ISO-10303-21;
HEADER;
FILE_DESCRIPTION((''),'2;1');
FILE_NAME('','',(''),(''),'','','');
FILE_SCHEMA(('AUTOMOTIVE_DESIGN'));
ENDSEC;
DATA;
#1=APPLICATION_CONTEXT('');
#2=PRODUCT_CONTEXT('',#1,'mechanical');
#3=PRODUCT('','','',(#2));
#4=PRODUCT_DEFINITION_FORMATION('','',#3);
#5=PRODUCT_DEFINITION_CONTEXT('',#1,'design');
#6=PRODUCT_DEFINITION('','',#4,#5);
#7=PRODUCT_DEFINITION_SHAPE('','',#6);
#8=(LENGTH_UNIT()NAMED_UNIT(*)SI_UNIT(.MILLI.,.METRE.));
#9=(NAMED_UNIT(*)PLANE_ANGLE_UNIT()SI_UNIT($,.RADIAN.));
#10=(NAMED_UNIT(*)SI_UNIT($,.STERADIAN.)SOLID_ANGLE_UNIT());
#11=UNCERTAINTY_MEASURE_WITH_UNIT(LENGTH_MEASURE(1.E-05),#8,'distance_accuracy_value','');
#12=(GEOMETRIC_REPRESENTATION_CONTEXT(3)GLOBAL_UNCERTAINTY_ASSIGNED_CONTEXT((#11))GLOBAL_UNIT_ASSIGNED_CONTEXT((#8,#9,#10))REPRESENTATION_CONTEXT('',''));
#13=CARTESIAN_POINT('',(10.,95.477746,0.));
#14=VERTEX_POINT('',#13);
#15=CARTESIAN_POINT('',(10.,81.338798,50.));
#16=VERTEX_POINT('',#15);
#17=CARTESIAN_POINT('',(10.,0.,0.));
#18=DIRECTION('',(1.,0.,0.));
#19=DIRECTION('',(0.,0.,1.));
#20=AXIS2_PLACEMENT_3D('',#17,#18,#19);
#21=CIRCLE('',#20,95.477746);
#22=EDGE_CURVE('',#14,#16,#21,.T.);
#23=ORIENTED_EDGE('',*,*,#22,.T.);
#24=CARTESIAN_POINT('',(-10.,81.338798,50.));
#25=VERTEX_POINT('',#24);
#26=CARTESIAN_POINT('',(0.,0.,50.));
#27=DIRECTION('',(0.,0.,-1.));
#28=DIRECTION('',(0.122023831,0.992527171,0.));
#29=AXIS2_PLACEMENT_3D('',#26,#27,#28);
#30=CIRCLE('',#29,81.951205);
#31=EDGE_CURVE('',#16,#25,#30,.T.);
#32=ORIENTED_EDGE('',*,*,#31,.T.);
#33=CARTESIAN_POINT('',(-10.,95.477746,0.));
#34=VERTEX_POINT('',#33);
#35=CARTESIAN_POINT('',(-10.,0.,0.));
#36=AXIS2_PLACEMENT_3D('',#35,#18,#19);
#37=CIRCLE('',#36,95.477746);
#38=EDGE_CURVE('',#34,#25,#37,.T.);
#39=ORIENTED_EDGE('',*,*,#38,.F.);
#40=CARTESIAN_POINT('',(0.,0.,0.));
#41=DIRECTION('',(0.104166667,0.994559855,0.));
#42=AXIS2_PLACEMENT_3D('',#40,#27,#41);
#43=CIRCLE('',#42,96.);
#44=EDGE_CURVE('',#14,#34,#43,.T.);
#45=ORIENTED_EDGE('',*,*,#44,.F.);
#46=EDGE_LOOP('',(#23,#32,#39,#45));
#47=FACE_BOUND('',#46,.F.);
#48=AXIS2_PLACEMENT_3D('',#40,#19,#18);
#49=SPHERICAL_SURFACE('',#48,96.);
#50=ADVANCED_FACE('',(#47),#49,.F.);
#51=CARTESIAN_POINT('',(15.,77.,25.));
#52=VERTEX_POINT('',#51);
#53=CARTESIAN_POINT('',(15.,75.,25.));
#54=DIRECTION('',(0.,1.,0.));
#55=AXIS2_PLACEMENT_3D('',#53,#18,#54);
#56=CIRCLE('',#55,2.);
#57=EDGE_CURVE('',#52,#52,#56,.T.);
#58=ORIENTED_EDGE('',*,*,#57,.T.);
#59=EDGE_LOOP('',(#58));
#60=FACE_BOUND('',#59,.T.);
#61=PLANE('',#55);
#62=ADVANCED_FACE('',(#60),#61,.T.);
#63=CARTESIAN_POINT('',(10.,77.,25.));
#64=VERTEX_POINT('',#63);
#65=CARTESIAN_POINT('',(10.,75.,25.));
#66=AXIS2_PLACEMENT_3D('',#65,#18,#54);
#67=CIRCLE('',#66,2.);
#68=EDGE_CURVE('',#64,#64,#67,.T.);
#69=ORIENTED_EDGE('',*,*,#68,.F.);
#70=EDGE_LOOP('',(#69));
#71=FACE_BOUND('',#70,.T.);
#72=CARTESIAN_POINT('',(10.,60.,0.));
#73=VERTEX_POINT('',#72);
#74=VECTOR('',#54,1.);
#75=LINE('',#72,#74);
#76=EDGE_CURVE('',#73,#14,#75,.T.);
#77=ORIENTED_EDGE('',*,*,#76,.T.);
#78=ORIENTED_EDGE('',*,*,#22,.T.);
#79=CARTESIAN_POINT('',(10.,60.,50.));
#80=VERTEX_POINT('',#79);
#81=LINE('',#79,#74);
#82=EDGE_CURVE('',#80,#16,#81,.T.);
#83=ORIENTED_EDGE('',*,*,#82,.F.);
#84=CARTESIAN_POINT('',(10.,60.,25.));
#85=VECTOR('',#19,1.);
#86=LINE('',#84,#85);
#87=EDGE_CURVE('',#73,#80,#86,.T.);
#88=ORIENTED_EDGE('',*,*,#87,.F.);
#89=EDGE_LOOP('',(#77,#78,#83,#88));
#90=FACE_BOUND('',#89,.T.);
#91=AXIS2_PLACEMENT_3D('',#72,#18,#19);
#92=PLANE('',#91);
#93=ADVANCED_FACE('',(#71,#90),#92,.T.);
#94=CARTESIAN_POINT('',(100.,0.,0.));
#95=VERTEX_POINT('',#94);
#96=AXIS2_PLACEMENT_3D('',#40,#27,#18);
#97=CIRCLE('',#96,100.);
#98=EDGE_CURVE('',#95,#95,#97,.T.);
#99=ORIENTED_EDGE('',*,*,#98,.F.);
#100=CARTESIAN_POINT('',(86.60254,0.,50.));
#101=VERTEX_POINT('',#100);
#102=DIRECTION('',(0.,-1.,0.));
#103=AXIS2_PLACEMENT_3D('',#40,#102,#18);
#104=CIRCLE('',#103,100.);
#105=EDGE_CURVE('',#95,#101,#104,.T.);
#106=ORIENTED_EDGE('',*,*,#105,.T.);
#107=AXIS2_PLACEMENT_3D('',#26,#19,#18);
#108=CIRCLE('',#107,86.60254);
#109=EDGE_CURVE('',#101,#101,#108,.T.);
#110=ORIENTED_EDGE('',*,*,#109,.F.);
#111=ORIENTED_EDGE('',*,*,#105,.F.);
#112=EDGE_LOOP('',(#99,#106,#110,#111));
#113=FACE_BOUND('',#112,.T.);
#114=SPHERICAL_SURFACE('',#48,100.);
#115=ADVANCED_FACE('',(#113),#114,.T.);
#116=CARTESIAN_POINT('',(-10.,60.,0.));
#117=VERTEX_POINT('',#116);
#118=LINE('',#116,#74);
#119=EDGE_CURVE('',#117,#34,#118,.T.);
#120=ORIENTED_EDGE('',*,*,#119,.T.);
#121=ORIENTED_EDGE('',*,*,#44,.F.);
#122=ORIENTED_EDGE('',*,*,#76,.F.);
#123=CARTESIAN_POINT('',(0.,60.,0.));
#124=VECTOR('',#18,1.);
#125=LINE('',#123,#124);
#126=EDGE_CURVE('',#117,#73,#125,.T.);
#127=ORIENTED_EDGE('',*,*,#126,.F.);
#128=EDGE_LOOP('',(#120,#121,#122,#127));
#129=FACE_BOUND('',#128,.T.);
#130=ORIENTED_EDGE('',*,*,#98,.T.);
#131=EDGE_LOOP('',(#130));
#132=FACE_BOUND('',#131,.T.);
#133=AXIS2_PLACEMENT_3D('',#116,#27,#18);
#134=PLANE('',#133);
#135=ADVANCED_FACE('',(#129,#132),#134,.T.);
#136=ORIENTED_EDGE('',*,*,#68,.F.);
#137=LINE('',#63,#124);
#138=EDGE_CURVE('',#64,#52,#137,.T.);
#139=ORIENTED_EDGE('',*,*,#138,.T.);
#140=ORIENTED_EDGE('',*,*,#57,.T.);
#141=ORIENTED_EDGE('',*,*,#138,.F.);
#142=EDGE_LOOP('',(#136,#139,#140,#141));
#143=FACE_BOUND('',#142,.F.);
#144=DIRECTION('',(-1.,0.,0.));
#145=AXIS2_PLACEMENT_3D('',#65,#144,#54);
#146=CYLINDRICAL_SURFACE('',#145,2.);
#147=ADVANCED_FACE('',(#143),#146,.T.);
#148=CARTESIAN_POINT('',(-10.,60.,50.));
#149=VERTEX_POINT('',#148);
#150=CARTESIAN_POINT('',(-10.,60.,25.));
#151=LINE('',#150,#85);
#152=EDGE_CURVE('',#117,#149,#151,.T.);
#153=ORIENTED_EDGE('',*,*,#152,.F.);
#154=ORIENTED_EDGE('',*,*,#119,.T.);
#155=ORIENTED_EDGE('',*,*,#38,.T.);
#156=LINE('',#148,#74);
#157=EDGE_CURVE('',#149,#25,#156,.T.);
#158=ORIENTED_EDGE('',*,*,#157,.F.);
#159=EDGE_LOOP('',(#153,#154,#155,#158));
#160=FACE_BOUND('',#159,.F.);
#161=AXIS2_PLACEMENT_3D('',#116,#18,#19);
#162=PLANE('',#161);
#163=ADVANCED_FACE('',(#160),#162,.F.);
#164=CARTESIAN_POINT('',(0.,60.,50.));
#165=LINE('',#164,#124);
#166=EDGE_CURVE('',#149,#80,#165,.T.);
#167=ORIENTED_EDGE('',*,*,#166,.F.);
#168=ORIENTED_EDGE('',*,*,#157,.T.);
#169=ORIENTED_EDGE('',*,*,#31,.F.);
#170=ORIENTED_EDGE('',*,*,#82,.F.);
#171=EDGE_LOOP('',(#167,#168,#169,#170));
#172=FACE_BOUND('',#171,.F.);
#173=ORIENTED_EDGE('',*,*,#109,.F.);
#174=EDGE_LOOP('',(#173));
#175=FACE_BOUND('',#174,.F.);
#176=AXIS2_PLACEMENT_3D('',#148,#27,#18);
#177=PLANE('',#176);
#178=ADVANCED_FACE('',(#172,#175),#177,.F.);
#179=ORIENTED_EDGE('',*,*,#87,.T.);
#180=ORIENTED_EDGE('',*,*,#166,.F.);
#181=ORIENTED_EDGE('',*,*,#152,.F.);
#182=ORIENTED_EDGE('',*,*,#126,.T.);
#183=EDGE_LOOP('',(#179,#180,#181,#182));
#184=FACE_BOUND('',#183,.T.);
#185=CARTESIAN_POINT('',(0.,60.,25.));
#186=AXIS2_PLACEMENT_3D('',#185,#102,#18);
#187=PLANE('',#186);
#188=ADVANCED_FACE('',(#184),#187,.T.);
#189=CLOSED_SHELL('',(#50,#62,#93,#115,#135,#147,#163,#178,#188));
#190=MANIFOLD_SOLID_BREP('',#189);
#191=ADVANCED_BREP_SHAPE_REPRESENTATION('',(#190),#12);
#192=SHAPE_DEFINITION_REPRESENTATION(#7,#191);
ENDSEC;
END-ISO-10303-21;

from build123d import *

# Parameters (mm, degrees)
F2_T     = -4
F4_W     = 20
F4_H     = 50
F5_REACH = 93.8526480713
F6_R     = 2
F7_DEPTH = 5


with BuildPart() as f1:
    # F0 (on Front) → F1 (revolve)
    with BuildSketch(Plane.XZ):
        with BuildLine():
            Line((0, 0), (100, 0))
            ThreePointArc((100, 0), (96.5925826289, 25.8819045103), (86.6025403784, 50))
            Line((86.6025403784, 50), (0, 50))
            Line((0, 50), (0, 0))
        make_face()
    revolve(axis=Axis((0, 0, 53.0949570239), (0, 0, 1)))

    # F2
    f2_openings = [f1.faces().sort_by_distance(p)[0] for p in [
        (0, 0, 0),
        (0, 0, 50),
    ]]
    offset(amount=F2_T, openings=f2_openings)

    f5_end = f1.faces().sort_by_distance((-96.5925826289, 0, 25.8819045103))[0]
    # F4 (on offset) → F5 (join, up to a face of the model that its end follows)
    with BuildSketch(Plane.XZ.offset(-60)):
        with Locations((0, 25)):
            Rectangle(F4_W, F4_H)
    f5_long = extrude(amount=-F5_REACH, mode=Mode.PRIVATE)
    add(split(f5_long, bisect_by=f5_end, keep=Keep.BOTTOM, mode=Mode.PRIVATE))

    # F6 (on face) → F7 (join)
    with BuildSketch(Plane.YZ.offset(10)):
        with Locations((75, 25)):
            Circle(F6_R)
    extrude(amount=F7_DEPTH)


solid = f1.part
